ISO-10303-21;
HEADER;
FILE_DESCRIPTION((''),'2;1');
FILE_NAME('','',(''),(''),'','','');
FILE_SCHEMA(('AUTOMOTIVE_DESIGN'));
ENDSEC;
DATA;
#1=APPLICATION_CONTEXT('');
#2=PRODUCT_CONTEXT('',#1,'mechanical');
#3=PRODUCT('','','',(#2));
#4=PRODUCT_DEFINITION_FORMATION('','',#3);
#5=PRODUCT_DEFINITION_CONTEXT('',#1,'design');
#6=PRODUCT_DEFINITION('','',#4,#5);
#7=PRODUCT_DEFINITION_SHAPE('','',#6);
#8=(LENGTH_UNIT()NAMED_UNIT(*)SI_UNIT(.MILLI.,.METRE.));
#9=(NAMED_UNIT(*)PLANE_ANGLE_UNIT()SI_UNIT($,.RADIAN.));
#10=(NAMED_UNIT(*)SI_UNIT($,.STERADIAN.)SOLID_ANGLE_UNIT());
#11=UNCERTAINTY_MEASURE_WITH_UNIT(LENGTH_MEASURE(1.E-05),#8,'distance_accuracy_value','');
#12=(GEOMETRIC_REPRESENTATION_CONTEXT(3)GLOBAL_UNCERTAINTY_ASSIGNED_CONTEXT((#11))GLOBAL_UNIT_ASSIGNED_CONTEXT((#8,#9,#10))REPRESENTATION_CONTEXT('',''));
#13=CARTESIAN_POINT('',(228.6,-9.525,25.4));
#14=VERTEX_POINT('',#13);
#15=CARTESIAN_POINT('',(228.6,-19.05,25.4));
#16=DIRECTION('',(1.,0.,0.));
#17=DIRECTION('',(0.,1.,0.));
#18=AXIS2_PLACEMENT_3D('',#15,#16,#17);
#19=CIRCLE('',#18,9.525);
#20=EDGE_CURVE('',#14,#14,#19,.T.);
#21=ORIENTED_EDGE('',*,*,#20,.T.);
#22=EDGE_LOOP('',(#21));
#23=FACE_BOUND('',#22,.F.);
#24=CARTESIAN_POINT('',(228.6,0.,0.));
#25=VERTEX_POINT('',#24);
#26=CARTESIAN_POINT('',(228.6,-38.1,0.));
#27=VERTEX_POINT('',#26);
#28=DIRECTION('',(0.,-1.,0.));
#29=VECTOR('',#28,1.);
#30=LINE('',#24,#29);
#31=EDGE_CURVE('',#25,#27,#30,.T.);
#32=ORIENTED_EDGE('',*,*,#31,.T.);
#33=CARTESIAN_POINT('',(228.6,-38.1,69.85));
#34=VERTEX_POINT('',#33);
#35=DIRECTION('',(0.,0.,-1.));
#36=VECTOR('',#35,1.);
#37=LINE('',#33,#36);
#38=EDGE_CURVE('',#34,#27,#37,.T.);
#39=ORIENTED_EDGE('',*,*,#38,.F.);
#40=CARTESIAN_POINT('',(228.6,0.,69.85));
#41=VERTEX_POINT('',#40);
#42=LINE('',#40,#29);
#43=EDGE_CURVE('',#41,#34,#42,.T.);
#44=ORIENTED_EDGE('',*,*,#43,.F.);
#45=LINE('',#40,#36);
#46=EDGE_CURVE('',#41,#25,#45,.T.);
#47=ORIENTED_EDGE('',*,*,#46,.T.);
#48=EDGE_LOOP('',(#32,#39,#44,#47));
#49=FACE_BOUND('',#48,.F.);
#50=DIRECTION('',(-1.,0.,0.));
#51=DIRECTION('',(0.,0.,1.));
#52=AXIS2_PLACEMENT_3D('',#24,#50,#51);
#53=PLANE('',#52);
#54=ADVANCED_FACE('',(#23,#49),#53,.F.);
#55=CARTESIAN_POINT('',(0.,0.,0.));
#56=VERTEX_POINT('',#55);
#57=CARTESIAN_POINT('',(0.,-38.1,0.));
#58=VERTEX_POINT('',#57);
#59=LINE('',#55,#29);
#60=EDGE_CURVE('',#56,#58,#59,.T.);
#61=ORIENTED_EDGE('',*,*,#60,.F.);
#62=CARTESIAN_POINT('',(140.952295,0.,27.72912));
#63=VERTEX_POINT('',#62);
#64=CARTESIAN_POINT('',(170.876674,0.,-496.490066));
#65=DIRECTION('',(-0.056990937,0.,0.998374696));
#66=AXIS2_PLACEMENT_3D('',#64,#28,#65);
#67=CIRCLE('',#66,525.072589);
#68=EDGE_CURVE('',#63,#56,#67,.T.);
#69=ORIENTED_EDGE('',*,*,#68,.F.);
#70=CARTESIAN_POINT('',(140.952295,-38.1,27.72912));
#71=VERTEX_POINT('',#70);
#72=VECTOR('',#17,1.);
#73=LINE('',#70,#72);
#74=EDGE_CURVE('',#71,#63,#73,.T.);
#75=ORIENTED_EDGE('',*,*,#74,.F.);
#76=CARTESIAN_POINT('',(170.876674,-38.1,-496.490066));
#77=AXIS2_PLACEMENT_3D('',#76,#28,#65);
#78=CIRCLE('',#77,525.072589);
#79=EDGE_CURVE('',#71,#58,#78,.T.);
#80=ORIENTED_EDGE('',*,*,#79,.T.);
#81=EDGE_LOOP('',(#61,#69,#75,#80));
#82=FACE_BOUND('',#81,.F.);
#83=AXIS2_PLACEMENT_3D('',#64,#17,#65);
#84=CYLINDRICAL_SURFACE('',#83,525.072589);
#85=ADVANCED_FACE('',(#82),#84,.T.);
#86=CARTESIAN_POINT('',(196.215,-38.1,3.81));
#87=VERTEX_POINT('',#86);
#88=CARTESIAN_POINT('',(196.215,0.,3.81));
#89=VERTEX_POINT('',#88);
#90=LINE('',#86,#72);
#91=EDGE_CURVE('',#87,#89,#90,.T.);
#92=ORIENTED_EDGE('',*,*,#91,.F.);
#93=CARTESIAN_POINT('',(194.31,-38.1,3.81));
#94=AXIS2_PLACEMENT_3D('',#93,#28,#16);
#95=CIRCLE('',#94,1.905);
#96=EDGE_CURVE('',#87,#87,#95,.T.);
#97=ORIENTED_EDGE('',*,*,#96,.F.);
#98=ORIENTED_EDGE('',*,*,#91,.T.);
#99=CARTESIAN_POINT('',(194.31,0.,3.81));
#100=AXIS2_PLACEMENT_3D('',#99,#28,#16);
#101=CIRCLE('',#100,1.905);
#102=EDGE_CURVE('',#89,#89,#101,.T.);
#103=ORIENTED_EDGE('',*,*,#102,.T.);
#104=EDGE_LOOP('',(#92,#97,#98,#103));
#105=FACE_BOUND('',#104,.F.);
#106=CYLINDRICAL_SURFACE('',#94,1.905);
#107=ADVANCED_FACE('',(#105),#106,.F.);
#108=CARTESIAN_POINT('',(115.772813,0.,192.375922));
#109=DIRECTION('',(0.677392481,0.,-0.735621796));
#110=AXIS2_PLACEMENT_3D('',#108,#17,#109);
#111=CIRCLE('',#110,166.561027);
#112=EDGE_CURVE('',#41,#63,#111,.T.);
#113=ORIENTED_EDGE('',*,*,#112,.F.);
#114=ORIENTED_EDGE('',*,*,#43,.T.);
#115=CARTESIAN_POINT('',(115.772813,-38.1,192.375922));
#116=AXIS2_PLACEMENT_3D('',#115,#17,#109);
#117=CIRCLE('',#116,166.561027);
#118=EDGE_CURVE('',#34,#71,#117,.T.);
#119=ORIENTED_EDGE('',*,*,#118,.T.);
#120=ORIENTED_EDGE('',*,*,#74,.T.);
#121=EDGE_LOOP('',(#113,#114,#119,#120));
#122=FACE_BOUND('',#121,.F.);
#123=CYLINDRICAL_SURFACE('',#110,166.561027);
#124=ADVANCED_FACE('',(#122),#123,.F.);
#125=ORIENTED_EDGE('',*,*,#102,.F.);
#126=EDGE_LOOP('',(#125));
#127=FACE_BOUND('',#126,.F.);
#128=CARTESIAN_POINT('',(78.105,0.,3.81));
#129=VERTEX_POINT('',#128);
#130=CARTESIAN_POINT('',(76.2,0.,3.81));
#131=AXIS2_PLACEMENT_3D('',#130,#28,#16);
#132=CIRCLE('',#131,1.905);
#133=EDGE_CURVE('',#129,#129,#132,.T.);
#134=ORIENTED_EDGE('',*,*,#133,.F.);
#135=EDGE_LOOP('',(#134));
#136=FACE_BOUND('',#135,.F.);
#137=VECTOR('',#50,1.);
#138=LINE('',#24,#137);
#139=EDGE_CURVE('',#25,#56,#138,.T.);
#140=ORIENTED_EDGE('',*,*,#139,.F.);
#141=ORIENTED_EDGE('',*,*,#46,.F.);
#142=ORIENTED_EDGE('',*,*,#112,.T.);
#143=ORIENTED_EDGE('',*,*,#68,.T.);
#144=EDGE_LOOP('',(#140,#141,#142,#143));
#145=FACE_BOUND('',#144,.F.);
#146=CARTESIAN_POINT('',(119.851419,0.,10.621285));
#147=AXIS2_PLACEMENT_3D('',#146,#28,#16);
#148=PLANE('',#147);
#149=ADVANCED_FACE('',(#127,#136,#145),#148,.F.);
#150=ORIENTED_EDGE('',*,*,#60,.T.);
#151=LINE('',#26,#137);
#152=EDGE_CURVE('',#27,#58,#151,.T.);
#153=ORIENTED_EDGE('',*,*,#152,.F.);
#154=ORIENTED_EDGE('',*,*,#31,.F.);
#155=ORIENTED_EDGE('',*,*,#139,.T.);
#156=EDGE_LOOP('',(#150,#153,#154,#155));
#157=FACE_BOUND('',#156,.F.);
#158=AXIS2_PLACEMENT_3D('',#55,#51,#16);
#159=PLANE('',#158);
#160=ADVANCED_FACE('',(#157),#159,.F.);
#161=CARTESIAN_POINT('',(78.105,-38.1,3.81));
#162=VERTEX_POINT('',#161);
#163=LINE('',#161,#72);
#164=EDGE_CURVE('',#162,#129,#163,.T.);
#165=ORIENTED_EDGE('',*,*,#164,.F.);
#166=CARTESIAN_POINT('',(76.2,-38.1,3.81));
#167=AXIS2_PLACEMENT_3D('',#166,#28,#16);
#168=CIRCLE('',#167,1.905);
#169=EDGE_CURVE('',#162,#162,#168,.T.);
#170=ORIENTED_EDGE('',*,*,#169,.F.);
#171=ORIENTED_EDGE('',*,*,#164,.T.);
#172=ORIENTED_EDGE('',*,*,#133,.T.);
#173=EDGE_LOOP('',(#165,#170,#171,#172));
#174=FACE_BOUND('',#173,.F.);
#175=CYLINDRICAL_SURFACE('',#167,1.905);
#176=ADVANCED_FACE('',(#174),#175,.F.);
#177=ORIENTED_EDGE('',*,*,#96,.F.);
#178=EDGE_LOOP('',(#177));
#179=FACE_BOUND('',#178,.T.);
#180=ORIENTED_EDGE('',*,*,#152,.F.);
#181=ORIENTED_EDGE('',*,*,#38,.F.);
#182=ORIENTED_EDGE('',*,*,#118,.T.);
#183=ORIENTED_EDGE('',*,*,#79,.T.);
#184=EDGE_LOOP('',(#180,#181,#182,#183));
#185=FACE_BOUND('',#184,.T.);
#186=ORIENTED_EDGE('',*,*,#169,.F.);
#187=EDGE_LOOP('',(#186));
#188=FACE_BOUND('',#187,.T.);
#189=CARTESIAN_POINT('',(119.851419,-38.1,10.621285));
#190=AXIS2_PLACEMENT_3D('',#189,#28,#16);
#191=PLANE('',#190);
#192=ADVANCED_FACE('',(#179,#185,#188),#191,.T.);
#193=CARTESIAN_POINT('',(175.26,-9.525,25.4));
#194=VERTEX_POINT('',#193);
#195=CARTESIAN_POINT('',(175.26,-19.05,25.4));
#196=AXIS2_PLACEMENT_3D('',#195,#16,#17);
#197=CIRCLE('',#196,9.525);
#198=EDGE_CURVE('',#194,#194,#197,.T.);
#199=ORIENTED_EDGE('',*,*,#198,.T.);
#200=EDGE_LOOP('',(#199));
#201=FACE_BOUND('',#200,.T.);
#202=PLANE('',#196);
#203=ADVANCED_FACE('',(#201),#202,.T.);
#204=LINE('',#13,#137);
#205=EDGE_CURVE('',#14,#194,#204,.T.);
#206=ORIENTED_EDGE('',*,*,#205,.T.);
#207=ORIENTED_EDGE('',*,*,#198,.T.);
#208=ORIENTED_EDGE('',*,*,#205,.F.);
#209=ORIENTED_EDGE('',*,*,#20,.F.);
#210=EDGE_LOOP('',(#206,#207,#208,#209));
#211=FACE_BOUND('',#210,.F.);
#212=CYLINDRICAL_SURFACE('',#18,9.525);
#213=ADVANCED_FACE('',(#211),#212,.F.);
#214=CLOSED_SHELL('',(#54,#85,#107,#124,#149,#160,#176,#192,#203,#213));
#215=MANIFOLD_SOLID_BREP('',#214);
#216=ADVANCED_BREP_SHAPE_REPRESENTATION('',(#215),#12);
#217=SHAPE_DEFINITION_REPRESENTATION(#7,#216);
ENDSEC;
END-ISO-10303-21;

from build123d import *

# Parameters (mm, degrees)
F1_DEPTH = 38.1
F2_R     = 5.08
F3_DEPTH = 38.1
F4_R     = 9.525
F5_DEPTH = 53.34
F6_R     = 1.905
F7_DEPTH = 38.101
F8_DEPTH = 38.101


# Not quite as in the source:
# - a feature names something its author has since deleted; it is built from what else it names


with BuildPart() as f1:
    # F0 (on Front) → F1 (new body)
    with BuildSketch(Plane.XZ):
        with BuildLine():
            ThreePointArc((140.9522952768, 27.729119938), (69.5233725404, 18.7076937305), (0, 0))
            Line((0, 0), (228.6, 0))
            Line((228.6, 0), (228.6, 25.4))
            ThreePointArc((228.6, 25.4), (184.8248483375, 28.3972283618), (140.9522952768, 27.729119938))
        make_face()
    extrude(amount=F1_DEPTH)

    # F2
    f2_edges = [f1.edges().sort_by_distance(p)[0] for p in [
        (112.892107, 0, 25.371039),
        (112.892107, -38.1, 25.371039),
    ]]
    fillet(f2_edges, radius=F2_R)

    # F0 (on Front) → F3 (join)
    with BuildSketch(Plane.XZ):
        with BuildLine():
            ThreePointArc((140.9522952768, 27.729119938), (69.5233725404, 18.7076937305), (0, 0))
            Line((0, 0), (228.6, 0))
            Line((228.6, 0), (228.6, 25.4))
            ThreePointArc((228.6, 25.4), (184.8248483375, 28.3972283618), (140.9522952768, 27.729119938))
        make_face()
        with BuildLine():
            ThreePointArc((228.6, 69.85), (187.9185150392, 42.2507295914), (140.9522952768, 27.729119938))
            ThreePointArc((140.9522952768, 27.729119938), (184.8248483375, 28.3972283618), (228.6, 25.4))
            Line((228.6, 25.4), (228.6, 69.85))
        make_face()
    extrude(amount=F3_DEPTH)

    # F4 (on face) → F5 (cut)
    with BuildSketch(Plane.YZ.offset(228.6)):
        with Locations((-19.05, 25.4)):
            Circle(F4_R)
    extrude(amount=-F5_DEPTH, mode=Mode.SUBTRACT)

    # F6 (on face) → F7 (cut, through all)
    with BuildSketch(Plane.XZ.offset(38.1)):
        with Locations((76.2, 3.81)):
            Circle(F6_R)
    extrude(amount=-F7_DEPTH, mode=Mode.SUBTRACT)

    # F6 (on face) → F8 (cut, through all)
    with BuildSketch(Plane.XZ.offset(38.1)):
        with Locations((194.31, 3.81)):
            Circle(F6_R)
    extrude(amount=-F8_DEPTH, mode=Mode.SUBTRACT)


solid = f1.part
